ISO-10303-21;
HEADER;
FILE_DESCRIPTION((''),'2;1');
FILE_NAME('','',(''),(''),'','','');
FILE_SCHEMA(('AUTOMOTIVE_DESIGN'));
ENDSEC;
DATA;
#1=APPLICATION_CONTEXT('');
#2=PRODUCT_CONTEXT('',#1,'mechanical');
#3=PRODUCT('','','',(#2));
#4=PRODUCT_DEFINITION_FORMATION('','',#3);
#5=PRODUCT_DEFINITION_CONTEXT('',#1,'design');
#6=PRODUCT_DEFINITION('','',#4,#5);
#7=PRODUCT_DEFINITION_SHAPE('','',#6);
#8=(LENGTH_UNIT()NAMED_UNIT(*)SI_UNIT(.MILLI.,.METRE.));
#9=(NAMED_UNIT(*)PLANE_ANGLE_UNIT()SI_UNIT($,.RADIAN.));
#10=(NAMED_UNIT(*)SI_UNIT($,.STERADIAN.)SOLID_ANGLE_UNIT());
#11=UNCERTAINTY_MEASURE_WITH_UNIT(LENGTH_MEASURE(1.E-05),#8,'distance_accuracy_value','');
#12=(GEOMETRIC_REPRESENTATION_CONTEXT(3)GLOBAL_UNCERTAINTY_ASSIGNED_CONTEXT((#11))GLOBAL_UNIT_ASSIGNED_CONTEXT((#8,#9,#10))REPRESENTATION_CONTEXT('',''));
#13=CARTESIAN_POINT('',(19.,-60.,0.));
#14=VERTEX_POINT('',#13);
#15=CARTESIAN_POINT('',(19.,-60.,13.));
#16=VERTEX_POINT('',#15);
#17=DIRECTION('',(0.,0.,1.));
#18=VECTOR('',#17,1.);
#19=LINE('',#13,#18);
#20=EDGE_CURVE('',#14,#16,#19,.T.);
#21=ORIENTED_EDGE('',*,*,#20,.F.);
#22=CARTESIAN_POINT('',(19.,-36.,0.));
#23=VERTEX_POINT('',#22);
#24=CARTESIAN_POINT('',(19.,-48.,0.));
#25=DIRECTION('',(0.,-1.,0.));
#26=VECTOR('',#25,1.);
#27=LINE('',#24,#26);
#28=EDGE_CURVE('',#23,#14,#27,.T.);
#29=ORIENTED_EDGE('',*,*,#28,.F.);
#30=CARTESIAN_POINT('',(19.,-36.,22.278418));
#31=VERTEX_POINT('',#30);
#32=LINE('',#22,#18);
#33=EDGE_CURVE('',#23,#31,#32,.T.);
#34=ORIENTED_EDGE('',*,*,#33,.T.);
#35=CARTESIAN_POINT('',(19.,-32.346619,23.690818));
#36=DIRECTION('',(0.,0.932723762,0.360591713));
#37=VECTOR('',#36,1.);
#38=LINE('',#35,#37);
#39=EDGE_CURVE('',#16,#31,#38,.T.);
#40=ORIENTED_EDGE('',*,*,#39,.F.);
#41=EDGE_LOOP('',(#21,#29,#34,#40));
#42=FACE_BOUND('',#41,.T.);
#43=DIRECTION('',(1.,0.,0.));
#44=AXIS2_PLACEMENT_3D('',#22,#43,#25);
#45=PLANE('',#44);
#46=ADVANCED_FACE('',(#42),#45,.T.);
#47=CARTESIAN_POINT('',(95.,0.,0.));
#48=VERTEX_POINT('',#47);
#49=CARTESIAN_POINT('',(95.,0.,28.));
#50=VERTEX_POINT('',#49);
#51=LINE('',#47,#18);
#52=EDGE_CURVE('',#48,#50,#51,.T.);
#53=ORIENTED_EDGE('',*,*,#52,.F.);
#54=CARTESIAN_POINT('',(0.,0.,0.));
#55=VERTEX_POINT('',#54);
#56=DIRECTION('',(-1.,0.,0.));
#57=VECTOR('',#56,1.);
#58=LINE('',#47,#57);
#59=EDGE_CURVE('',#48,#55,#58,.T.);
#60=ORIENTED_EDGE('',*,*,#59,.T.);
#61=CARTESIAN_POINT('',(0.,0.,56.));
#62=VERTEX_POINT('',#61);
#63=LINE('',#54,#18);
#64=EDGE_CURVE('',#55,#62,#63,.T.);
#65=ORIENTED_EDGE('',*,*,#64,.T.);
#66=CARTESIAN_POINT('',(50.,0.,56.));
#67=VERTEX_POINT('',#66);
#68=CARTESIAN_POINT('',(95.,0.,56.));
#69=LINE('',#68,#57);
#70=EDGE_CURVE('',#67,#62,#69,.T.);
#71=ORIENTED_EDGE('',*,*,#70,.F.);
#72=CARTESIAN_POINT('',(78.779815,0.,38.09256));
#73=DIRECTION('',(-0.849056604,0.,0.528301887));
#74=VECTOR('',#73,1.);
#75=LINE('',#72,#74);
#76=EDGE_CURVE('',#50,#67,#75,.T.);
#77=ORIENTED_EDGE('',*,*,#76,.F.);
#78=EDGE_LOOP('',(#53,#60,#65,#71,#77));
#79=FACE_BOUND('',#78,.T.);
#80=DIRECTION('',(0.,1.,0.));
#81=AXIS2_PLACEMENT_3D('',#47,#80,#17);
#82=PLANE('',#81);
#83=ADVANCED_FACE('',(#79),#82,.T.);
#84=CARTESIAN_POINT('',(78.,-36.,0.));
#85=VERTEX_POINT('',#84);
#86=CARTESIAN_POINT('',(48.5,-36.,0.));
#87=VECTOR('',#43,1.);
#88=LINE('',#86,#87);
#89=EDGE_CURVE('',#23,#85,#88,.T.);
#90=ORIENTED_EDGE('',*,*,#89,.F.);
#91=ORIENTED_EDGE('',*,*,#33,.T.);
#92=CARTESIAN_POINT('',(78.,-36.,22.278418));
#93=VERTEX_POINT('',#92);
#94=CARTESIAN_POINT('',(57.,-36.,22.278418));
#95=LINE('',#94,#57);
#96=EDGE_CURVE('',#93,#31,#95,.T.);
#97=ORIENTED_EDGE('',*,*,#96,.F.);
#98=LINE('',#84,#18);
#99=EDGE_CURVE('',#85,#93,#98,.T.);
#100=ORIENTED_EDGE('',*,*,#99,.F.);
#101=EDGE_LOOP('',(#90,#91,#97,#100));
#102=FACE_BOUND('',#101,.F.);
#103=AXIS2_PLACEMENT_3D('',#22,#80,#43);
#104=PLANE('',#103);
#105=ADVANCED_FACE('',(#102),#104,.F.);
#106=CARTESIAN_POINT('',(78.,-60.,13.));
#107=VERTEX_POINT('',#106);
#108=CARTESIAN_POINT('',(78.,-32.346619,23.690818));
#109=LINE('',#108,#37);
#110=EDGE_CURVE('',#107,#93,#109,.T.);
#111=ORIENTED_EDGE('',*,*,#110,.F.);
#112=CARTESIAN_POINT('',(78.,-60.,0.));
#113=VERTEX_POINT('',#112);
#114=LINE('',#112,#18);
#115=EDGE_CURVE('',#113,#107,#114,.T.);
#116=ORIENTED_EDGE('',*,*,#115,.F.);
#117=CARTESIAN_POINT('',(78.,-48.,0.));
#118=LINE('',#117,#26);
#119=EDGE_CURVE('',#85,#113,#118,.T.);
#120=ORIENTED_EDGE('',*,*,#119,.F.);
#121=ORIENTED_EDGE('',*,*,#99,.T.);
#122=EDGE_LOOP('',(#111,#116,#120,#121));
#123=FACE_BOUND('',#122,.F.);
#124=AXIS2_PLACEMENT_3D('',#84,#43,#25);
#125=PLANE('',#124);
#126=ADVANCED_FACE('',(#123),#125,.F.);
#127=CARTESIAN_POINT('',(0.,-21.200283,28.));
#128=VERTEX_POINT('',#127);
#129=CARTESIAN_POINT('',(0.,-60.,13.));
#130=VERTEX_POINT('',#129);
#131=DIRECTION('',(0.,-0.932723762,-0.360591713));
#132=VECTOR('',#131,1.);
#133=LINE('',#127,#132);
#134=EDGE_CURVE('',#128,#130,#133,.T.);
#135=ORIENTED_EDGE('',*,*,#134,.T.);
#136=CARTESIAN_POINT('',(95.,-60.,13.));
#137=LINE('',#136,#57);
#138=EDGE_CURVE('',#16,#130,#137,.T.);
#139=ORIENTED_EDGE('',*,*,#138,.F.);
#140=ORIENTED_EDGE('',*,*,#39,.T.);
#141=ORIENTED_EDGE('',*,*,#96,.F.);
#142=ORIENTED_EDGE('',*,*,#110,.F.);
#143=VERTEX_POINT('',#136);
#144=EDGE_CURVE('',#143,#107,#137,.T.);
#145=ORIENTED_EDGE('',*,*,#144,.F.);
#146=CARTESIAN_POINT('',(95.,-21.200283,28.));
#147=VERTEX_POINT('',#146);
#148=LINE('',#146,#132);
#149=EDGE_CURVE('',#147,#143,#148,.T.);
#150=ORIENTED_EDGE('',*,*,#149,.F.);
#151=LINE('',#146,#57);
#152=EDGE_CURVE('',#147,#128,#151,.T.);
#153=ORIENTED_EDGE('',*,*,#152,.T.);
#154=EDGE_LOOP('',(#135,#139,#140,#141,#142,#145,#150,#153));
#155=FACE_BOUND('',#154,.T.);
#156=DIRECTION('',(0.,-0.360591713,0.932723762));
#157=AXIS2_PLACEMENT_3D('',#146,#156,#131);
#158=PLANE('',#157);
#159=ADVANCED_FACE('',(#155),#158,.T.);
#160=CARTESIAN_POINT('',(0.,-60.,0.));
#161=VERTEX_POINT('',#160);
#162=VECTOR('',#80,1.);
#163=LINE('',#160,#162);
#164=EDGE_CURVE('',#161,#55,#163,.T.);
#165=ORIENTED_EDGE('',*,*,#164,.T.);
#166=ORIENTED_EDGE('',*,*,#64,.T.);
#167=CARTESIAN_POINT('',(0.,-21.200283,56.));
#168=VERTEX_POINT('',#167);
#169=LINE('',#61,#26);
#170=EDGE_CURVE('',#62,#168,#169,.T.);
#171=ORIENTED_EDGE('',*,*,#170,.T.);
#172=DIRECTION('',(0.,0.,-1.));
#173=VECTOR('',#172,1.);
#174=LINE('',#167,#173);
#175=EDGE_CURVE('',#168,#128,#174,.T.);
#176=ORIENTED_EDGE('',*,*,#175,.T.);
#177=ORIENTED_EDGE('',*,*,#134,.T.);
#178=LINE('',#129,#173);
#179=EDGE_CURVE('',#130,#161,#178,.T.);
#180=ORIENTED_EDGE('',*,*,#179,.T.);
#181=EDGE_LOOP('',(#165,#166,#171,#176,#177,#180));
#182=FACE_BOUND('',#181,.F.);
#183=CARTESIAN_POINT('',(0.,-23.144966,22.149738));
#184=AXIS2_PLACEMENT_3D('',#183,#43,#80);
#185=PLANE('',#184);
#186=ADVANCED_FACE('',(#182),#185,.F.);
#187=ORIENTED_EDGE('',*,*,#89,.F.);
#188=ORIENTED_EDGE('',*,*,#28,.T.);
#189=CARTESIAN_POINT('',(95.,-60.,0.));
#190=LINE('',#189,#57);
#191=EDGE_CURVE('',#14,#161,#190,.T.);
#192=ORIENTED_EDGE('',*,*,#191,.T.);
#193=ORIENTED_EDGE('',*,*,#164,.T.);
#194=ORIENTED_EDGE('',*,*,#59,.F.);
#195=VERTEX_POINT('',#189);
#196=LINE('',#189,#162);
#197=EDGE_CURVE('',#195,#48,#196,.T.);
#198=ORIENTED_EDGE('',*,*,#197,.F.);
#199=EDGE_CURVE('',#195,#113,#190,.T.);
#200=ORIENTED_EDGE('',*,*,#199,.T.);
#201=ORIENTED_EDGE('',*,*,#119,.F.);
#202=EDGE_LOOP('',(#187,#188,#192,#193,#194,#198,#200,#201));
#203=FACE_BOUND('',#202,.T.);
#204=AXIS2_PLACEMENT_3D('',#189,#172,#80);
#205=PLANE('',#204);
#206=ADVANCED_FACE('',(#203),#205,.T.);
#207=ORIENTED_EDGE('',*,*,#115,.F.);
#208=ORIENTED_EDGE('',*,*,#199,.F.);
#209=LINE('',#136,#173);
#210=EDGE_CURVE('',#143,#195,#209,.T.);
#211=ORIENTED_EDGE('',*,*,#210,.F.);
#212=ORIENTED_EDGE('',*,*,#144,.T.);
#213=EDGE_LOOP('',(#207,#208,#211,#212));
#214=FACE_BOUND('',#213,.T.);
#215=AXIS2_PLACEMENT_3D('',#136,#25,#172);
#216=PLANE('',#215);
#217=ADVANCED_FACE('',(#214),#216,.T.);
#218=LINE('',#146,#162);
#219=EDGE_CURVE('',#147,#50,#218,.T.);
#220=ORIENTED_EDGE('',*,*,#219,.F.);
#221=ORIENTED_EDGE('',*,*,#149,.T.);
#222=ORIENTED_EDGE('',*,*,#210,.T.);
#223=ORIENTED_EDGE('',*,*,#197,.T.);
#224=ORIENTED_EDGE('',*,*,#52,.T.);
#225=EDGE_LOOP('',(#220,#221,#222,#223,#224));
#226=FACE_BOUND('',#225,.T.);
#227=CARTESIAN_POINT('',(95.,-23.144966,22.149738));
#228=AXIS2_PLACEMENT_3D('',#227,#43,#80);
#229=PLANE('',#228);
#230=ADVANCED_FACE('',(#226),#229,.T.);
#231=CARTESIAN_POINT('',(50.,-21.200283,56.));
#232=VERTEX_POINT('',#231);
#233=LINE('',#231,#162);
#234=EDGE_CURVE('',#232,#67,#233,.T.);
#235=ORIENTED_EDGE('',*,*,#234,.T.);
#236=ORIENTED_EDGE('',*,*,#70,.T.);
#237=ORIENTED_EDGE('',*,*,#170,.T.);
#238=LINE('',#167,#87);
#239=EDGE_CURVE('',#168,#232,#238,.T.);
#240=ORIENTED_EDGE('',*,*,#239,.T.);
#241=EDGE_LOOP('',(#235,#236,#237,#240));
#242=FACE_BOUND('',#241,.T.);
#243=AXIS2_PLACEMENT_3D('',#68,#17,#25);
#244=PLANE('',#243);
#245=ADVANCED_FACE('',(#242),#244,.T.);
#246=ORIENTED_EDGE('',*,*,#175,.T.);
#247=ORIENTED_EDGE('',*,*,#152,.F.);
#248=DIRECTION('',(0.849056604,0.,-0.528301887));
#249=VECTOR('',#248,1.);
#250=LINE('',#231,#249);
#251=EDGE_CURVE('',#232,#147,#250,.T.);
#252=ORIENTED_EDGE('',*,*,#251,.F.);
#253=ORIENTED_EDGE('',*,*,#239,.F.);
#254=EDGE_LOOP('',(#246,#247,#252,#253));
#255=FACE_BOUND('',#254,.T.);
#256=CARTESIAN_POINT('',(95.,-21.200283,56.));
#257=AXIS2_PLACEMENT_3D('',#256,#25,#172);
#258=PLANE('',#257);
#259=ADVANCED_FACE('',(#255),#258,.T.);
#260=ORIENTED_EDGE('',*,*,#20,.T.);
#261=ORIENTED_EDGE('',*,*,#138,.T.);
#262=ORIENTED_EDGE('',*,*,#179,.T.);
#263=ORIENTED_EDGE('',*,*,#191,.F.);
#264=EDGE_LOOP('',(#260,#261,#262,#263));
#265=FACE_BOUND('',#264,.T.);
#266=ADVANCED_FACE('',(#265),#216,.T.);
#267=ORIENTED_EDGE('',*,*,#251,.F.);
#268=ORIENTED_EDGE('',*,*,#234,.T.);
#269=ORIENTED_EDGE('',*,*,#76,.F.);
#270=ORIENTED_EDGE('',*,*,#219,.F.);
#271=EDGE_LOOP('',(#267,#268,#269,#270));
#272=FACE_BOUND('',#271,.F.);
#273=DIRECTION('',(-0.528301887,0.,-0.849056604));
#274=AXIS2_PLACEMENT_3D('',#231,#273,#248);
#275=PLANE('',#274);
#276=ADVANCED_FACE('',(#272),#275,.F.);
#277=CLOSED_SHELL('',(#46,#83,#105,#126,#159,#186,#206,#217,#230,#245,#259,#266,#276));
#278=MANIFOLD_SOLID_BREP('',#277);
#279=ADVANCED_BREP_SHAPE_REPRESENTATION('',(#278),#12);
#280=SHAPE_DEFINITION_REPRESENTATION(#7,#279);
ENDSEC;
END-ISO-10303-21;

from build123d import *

# Parameters (mm, degrees)
F1_DEPTH = 95
F3_DEPTH = 21.2002830101
F5_DEPTH = 25
F6_W     = 59
F6_H     = 24
F7_DEPTH = 30


with BuildPart() as f1:
    # F0 (on Right) → F1 (new body)
    with BuildSketch(Plane.YZ):
        Polygon((-60, 0), (0, 0), (0, 56), (-21.2002830101, 56), (-21.2002830101, 28), (-60, 13), align=None)
    extrude(amount=-F1_DEPTH)

    # F2 (on face) → F3 (join, through all)
    with BuildSketch(Plane.XZ.offset(21.2002830101)):
        Polygon((0, 56), (-38.8899631798, 56), (0, 28), align=None)
    extrude(amount=-F3_DEPTH)

    # F4 (on face) → F5 (cut)
    with BuildSketch(Plane.XZ.offset(21.2002830101)):
        Polygon((0, 56), (-45, 56), (0, 28), align=None)
    extrude(amount=-F5_DEPTH, mode=Mode.SUBTRACT)

    # F6 (on face) → F7 (cut)
    with BuildSketch(Plane(origin=(0, 0, 0), x_dir=(1, 0, 0), z_dir=(0, 0, -1))):
        with Locations((-46.5, 48)):
            Rectangle(F6_W, F6_H)
    extrude(amount=-F7_DEPTH, mode=Mode.SUBTRACT)


with BuildPart() as f1_1:
    # F8: moved
    add(f1.part.moved(Location((95, 0, 0))))


solid = f1_1.part
